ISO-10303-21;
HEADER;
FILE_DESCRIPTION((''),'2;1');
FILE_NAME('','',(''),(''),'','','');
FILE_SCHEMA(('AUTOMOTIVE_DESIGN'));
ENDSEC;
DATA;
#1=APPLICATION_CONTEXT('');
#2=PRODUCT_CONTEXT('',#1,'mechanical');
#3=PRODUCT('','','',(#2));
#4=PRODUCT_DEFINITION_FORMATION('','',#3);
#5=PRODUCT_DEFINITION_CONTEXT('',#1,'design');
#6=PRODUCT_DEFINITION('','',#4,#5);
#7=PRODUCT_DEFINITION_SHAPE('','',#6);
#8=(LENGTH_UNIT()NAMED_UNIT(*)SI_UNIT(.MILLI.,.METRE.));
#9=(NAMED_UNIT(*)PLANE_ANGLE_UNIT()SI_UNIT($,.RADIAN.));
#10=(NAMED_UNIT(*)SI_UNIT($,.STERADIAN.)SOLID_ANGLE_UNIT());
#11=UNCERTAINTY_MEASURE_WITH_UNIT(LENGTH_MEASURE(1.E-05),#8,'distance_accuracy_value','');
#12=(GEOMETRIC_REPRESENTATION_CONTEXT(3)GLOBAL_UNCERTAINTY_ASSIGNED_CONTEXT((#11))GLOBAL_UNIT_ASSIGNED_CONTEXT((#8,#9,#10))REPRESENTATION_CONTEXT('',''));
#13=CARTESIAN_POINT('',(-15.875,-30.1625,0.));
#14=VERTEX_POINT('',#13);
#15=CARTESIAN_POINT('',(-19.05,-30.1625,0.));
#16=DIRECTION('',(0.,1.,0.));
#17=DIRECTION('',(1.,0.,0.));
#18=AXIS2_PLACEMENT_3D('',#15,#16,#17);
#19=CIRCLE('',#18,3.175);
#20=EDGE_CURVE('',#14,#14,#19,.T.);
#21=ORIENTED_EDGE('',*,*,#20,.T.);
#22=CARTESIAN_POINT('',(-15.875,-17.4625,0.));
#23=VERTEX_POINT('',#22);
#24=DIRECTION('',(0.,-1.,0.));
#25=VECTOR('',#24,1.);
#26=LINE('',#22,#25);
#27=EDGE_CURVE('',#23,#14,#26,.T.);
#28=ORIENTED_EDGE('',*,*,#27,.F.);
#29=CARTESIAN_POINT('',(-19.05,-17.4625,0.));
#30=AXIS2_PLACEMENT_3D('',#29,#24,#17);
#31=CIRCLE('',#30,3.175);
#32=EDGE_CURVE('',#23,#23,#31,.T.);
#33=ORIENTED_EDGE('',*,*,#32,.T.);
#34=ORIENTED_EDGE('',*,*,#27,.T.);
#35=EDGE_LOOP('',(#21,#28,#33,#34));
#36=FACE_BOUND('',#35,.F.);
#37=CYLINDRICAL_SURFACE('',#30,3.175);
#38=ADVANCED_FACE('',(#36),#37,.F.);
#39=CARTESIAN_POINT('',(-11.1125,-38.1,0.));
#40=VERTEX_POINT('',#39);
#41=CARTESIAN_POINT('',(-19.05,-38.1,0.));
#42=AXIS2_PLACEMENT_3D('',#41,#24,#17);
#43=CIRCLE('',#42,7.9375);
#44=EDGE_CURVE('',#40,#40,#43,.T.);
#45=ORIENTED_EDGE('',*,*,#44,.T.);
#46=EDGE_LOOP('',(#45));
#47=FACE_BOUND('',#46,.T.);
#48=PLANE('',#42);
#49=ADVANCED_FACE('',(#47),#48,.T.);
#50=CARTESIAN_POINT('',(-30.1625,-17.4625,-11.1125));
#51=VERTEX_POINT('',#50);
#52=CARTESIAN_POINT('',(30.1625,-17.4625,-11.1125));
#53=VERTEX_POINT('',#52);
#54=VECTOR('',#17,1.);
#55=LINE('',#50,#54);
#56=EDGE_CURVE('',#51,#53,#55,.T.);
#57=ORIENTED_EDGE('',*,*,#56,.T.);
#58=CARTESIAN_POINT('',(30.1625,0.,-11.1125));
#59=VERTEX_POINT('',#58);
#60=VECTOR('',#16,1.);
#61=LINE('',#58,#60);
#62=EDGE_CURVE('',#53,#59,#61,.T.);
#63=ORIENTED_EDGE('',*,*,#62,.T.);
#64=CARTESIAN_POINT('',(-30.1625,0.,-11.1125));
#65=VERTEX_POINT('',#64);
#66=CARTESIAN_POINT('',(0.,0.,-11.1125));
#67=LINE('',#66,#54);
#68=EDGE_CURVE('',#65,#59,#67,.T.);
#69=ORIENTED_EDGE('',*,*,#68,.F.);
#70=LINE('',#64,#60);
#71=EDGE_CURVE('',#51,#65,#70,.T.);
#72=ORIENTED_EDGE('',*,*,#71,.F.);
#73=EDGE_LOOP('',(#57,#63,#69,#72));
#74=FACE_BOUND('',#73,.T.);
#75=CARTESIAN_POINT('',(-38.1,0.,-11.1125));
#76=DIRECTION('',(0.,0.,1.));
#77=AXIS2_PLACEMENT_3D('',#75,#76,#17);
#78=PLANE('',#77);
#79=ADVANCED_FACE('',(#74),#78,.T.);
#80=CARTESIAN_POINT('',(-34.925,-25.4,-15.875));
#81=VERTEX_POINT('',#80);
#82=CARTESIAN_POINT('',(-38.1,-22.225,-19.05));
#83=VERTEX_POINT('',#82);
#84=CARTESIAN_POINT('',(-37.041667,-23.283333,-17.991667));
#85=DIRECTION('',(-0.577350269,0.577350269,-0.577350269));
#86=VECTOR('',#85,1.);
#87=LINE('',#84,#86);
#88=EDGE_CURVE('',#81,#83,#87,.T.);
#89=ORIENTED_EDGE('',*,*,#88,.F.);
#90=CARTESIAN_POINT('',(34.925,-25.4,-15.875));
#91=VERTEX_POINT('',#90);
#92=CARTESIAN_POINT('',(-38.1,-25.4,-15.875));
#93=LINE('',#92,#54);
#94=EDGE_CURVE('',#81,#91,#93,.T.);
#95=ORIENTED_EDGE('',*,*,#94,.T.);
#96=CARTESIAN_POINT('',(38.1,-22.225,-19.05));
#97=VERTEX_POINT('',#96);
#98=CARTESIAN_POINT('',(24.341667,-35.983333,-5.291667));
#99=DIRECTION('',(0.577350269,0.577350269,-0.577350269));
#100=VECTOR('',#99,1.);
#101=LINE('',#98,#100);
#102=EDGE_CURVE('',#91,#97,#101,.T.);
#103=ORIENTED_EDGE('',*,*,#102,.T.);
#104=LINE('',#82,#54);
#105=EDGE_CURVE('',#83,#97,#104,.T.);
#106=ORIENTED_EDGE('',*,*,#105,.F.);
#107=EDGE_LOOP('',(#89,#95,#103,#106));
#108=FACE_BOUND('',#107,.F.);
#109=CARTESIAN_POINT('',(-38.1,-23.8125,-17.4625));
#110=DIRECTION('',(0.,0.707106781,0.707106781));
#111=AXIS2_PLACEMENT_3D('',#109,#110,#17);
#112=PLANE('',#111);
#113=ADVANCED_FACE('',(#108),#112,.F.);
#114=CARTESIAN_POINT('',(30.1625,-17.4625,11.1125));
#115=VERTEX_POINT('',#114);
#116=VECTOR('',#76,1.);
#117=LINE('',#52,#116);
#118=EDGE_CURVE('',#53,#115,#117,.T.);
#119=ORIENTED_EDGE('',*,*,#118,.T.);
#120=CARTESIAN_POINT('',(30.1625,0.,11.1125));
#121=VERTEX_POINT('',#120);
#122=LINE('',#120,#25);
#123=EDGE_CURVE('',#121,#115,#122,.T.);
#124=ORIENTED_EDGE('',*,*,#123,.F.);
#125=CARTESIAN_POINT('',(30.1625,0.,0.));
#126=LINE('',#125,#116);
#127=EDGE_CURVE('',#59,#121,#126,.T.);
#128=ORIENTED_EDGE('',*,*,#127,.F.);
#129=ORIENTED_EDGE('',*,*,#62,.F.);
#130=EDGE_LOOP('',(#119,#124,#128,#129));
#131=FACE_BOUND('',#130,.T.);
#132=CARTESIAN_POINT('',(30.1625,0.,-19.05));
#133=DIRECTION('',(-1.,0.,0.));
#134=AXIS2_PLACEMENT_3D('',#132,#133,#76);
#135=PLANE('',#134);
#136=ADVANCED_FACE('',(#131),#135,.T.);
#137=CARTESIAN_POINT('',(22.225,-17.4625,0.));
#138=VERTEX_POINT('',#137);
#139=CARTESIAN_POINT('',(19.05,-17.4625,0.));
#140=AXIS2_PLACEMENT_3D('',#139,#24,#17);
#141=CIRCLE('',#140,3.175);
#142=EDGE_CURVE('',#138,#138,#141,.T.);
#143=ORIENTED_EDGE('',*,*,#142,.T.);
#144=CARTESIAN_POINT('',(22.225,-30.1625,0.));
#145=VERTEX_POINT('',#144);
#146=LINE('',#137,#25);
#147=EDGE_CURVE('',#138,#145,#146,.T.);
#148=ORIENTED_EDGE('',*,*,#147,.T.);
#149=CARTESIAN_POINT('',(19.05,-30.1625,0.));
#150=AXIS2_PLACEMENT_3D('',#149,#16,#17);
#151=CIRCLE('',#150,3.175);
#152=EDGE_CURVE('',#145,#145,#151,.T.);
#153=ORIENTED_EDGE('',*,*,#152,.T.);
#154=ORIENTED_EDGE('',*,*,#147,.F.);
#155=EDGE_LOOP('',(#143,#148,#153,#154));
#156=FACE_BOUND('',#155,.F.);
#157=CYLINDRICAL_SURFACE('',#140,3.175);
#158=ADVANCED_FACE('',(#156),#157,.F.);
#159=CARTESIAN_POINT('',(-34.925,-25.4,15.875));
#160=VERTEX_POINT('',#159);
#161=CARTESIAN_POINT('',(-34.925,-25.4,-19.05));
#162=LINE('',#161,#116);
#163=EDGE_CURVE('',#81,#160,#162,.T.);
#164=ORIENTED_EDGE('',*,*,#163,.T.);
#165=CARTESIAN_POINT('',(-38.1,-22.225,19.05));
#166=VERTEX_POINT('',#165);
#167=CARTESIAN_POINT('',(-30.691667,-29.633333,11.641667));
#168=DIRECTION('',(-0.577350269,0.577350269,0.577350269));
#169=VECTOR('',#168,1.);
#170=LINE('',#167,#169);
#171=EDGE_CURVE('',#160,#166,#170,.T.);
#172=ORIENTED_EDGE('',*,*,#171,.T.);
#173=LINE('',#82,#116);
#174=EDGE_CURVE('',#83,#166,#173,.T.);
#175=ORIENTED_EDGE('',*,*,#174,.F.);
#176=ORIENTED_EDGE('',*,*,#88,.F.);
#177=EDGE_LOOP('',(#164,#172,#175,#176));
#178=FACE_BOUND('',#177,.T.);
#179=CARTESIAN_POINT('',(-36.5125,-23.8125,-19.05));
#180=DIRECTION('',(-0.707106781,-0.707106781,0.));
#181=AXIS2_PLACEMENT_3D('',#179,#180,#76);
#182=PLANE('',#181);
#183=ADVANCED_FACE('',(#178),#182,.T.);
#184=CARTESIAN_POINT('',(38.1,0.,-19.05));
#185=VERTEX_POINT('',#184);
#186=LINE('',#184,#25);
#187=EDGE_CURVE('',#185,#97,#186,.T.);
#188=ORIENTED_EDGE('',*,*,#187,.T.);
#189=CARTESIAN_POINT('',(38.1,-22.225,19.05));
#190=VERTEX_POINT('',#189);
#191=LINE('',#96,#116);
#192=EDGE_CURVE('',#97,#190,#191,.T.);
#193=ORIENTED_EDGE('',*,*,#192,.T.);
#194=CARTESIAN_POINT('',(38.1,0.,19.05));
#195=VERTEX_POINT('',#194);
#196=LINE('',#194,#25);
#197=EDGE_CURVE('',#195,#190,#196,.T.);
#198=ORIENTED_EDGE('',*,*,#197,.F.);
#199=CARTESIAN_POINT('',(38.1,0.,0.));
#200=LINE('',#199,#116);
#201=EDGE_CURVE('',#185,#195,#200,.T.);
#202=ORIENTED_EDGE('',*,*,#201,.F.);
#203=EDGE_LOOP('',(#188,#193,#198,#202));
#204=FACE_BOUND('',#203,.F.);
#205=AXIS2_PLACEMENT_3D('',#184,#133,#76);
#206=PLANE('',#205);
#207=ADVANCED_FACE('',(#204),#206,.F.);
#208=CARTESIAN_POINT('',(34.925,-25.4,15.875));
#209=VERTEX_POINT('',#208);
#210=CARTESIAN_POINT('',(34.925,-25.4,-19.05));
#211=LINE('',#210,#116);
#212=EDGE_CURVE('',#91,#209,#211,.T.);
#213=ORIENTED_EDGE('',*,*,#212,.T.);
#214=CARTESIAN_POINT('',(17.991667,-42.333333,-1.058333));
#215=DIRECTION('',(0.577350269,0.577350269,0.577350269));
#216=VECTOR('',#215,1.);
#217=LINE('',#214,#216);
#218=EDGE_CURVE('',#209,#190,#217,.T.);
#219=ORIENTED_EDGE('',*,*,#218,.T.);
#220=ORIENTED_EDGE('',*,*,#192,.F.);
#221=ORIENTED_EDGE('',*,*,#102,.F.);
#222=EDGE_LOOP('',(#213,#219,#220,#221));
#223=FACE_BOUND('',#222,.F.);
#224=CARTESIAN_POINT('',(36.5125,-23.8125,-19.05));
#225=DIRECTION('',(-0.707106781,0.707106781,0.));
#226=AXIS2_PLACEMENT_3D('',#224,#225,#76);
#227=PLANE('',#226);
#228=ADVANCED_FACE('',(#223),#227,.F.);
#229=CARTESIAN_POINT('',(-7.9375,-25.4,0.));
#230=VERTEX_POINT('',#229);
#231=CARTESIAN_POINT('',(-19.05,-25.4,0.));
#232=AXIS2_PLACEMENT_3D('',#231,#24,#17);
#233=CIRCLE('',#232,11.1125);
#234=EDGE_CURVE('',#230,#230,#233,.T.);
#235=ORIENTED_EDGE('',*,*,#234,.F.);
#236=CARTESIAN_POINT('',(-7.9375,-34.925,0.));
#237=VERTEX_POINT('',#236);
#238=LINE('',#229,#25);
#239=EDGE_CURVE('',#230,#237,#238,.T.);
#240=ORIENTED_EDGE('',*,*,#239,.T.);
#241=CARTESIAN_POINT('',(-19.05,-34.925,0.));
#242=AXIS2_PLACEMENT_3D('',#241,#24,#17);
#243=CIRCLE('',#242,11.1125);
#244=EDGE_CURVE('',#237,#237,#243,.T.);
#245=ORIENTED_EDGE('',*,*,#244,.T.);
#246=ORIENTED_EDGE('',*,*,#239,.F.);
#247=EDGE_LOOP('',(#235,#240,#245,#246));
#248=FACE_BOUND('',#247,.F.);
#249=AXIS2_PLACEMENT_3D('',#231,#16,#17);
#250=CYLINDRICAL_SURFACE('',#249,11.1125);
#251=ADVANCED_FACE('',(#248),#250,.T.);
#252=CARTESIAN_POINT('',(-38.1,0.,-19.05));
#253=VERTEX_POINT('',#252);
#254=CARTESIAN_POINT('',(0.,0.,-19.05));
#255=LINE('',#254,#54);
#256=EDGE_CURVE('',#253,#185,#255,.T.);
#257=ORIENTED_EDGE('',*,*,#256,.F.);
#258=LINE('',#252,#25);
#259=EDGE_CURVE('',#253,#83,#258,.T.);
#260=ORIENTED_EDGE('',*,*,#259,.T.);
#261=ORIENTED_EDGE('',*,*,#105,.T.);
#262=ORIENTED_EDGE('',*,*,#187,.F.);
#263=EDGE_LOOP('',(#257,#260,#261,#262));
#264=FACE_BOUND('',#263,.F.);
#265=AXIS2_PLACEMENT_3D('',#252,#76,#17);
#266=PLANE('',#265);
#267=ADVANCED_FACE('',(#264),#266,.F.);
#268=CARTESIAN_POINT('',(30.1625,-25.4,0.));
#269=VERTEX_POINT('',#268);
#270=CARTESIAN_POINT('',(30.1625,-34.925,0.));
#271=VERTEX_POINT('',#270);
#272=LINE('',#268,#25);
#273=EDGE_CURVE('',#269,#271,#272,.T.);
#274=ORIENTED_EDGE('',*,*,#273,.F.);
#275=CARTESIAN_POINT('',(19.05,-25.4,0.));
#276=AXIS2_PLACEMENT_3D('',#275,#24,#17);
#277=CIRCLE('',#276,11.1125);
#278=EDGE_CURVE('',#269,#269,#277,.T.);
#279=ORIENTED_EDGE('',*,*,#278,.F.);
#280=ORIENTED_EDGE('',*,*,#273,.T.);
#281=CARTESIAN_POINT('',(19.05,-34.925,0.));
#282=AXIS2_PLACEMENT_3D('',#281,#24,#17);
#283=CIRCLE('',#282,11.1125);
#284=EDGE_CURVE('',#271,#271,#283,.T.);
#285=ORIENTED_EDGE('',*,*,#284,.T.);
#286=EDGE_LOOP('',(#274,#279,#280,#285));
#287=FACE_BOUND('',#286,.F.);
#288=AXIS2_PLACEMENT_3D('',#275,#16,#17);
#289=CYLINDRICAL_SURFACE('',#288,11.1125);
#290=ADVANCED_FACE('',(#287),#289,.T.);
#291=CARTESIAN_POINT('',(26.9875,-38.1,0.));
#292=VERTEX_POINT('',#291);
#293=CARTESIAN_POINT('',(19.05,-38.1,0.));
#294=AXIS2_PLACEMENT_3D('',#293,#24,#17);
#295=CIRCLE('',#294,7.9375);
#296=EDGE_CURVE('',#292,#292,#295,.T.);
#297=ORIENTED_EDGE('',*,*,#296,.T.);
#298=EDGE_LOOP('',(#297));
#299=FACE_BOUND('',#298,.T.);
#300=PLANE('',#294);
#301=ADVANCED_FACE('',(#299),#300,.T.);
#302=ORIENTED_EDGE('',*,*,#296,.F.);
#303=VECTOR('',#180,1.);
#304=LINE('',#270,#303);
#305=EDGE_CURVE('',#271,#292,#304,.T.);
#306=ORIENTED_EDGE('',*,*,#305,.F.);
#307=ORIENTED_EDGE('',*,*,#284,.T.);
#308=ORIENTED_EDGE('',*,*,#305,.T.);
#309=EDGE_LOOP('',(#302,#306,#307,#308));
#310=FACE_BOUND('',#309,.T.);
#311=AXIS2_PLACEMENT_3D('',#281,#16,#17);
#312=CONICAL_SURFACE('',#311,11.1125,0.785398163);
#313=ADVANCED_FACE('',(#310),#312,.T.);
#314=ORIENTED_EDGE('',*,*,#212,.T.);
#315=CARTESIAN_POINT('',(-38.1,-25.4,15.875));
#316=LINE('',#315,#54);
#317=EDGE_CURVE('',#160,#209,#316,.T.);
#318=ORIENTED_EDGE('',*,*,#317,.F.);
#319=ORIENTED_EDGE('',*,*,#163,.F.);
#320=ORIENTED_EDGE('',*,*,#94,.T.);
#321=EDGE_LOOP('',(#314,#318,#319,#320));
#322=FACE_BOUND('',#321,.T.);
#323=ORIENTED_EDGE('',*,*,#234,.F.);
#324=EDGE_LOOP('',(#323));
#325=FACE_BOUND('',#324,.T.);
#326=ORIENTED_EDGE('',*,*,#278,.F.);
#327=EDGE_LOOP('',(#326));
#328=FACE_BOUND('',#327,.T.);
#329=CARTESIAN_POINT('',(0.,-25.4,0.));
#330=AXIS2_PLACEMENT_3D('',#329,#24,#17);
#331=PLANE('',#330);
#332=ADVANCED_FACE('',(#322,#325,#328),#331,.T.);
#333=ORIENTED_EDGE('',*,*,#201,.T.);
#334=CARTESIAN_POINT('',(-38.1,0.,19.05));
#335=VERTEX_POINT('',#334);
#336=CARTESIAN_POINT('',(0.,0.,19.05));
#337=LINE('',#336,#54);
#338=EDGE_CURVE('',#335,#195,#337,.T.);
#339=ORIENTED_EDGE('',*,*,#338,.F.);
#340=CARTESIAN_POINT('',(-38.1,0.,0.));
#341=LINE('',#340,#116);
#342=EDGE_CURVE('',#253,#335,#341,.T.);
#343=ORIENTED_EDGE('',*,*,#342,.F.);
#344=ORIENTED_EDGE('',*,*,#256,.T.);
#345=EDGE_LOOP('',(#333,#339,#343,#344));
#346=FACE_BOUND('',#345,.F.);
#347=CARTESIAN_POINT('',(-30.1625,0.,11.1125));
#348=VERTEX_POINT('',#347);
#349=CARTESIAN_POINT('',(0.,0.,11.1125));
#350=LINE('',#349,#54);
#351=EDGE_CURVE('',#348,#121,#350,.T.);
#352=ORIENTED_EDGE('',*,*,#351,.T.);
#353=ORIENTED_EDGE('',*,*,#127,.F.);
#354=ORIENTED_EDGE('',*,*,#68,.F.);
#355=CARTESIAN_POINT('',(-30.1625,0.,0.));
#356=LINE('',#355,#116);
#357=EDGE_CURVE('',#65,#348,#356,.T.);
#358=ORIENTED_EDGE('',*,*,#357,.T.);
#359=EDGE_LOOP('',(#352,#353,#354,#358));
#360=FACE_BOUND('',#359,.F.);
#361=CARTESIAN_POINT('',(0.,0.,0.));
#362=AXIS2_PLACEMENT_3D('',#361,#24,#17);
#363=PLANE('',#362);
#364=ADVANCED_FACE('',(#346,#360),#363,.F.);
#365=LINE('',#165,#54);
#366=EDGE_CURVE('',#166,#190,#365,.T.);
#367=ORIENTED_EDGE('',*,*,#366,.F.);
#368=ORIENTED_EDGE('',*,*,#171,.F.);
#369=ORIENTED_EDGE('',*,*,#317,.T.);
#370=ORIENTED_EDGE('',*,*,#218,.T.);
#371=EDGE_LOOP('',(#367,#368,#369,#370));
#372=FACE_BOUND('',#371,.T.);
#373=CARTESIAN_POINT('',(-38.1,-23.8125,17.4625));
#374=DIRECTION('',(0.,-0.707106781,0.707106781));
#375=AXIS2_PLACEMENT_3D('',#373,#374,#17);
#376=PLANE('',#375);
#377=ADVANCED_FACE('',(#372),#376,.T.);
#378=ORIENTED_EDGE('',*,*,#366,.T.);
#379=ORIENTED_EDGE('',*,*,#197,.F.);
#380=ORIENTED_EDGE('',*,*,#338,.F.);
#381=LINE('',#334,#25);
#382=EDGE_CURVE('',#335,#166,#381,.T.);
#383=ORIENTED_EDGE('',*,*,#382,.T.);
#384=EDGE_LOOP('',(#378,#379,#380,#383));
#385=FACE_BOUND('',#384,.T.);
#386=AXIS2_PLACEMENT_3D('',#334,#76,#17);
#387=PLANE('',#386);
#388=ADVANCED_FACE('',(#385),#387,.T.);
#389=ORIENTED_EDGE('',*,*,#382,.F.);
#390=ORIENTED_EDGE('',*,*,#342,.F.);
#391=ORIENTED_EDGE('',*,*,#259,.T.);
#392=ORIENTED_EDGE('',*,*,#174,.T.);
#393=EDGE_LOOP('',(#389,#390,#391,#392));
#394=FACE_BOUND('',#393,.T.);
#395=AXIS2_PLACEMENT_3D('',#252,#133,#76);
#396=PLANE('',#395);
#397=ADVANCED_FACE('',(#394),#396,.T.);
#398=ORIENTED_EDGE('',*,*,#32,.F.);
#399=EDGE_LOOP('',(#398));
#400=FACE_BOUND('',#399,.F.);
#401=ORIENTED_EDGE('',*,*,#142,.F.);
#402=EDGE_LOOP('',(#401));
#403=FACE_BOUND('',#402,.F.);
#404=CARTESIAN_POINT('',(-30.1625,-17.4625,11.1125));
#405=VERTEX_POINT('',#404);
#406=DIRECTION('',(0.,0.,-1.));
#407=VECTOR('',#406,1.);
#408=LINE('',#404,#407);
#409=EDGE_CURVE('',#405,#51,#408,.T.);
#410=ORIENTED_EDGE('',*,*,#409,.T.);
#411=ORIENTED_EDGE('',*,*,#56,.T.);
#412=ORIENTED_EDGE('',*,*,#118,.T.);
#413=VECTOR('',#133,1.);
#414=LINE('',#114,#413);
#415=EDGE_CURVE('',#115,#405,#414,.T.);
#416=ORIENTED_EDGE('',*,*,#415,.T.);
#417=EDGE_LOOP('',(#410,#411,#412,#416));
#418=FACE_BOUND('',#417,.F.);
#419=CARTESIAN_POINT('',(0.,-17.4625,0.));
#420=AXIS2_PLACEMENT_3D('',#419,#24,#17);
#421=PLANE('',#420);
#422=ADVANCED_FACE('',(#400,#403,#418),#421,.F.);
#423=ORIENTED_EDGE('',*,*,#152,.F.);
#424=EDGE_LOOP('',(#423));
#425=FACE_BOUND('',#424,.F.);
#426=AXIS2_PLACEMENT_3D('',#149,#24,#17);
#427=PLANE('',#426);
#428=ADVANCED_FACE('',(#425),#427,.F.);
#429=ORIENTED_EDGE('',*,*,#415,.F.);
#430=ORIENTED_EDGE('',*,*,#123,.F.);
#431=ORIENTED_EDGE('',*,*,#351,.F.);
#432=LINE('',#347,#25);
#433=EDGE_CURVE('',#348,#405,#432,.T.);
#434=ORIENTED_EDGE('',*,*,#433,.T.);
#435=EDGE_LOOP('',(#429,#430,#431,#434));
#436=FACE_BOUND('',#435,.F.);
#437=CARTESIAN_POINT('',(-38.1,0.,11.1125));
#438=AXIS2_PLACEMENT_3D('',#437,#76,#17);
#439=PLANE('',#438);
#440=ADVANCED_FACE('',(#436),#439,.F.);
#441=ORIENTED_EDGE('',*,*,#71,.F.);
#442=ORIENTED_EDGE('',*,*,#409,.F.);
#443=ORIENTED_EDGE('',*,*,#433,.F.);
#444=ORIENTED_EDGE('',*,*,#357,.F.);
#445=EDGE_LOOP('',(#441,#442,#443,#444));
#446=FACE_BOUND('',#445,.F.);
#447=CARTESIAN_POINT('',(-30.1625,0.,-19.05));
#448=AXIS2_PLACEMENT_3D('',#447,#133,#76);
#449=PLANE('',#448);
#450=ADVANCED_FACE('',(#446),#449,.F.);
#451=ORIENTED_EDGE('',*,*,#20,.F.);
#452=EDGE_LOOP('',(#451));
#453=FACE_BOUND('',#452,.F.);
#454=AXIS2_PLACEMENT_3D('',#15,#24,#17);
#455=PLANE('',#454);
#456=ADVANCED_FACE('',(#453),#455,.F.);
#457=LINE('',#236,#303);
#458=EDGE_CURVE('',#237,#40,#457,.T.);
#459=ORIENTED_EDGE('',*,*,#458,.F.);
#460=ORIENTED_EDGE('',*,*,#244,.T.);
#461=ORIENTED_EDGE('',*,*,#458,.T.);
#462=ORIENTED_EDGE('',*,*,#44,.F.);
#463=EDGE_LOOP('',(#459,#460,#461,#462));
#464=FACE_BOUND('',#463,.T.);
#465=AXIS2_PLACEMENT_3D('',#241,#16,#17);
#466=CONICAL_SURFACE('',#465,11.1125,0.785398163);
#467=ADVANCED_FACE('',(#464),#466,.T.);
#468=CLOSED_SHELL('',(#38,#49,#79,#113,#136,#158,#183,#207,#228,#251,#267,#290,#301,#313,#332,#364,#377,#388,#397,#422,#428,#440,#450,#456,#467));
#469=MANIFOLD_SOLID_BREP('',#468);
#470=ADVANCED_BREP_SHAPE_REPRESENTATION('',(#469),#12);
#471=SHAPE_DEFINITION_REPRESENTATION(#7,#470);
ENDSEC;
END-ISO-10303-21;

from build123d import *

# Parameters (mm, degrees)
F0_W     = 76.2
F0_H     = 38.1
F1_DEPTH = 25.4
F2_R     = 11.1125
F3_DEPTH = 12.7
F4_SIZE2 = 3.175
F4_SIZE  = 3.175
F5_SIZE2 = 3.175
F5_SIZE  = 3.175
F6_SIZE2 = 3.175
F6_SIZE  = 3.175
F7_T     = 7.9375


# Not quite as in the source:
# - a shell that OpenCascade refuses in one call is made with other operations: the cavity is built on its own and cut out


with BuildPart() as f1:
    # F0 (on Front) → F1 (new body)
    with BuildSketch(Plane.XZ):
        Rectangle(F0_W, F0_H)
    extrude(amount=F1_DEPTH)

    # F2 (on face) → F3 (join)
    with BuildSketch(Plane.XZ.offset(25.4)):
        with Locations((-19.05, 0)):
            Circle(F2_R)
        with Locations((19.05, 0)):
            Circle(F2_R)
    extrude(amount=F3_DEPTH)

    # F4
    f4_edges = [f1.edges().sort_by_distance(p)[0] for p in [
        (7.9375, -38.1, 0),
        (-30.1625, -38.1, 0),
    ]]
    chamfer(f4_edges, length=F4_SIZE, length2=F4_SIZE2)

    # F5
    f5_edges = [f1.edges().sort_by_distance(p)[0] for p in [
        (0, -25.4, 19.05),
    ]]
    chamfer(f5_edges, length=F5_SIZE, length2=F5_SIZE2)

    # F6
    f6_edges = [f1.edges().sort_by_distance(p)[0] for p in [
        (38.1, -25.4, -1.5875),
        (0, -25.4, -19.05),
        (-38.1, -25.4, -1.5875),
    ]]
    chamfer(f6_edges, length=F6_SIZE, length2=F6_SIZE2)

    # F7: shell of thickness 7.9375, made by hand


with BuildPart() as f7_core1:
    # F7_t2: copy of F1
    add(f1.part)

    # the walls: a layer under each face that stays
    f7_faces = [f7_core1.faces().sort_by_distance(p)[0] for p in [
        (0, -25.4, 0),
        (0, -23.8125, 17.4625),
        (36.5125, -23.8125, 0),
        (-36.5125, -23.8125, 0),
        (0, -23.8125, -17.4625),
        (-30.1625, -30.1625, 0),
        (7.9375, -30.1625, 0),
        (0, -11.1125, 19.05),
        (38.1, -11.1125, 0),
        (-38.1, -11.1125, 0),
        (0, -11.1125, -19.05),
        (-28.575, -36.5125, 0),
        (9.525, -36.5125, 0),
        (-19.05, -38.1, 0),
        (19.05, -38.1, 0),
    ]]
    thicken(f7_faces, amount=-F7_T, mode=Mode.SUBTRACT)

    # F7_s3 → F7_t4 (revolve, cut)
    with BuildSketch(Plane.XY):
        Polygon((-7.858125, -25.479375), (-7.9375, -17.4625), (-15.875, -17.4625), (-15.875, -25.4), align=None)
    revolve(axis=Axis((-19.05, -25.4, 0), (0, -1, 0)), mode=Mode.SUBTRACT)

    # F7_s5 → F7_t6 (revolve, cut)
    with BuildSketch(Plane.XY):
        Polygon((30.241875, -25.479375), (30.1625, -17.4625), (22.225, -17.4625), (22.225, -25.4), align=None)
    revolve(axis=Axis((19.05, -25.4, 0), (0, -1, 0)), mode=Mode.SUBTRACT)


with BuildPart() as f1_1:
    add(f1.part)

    # what is left inside the walls is the cavity
    f7_cavity = [f7_core1.part.solids().sort_by_distance(p)[0] for p in [
        (0, -0.079375, -3.704167),
    ]]
    add(f7_cavity, mode=Mode.SUBTRACT)


solid = f1_1.part
